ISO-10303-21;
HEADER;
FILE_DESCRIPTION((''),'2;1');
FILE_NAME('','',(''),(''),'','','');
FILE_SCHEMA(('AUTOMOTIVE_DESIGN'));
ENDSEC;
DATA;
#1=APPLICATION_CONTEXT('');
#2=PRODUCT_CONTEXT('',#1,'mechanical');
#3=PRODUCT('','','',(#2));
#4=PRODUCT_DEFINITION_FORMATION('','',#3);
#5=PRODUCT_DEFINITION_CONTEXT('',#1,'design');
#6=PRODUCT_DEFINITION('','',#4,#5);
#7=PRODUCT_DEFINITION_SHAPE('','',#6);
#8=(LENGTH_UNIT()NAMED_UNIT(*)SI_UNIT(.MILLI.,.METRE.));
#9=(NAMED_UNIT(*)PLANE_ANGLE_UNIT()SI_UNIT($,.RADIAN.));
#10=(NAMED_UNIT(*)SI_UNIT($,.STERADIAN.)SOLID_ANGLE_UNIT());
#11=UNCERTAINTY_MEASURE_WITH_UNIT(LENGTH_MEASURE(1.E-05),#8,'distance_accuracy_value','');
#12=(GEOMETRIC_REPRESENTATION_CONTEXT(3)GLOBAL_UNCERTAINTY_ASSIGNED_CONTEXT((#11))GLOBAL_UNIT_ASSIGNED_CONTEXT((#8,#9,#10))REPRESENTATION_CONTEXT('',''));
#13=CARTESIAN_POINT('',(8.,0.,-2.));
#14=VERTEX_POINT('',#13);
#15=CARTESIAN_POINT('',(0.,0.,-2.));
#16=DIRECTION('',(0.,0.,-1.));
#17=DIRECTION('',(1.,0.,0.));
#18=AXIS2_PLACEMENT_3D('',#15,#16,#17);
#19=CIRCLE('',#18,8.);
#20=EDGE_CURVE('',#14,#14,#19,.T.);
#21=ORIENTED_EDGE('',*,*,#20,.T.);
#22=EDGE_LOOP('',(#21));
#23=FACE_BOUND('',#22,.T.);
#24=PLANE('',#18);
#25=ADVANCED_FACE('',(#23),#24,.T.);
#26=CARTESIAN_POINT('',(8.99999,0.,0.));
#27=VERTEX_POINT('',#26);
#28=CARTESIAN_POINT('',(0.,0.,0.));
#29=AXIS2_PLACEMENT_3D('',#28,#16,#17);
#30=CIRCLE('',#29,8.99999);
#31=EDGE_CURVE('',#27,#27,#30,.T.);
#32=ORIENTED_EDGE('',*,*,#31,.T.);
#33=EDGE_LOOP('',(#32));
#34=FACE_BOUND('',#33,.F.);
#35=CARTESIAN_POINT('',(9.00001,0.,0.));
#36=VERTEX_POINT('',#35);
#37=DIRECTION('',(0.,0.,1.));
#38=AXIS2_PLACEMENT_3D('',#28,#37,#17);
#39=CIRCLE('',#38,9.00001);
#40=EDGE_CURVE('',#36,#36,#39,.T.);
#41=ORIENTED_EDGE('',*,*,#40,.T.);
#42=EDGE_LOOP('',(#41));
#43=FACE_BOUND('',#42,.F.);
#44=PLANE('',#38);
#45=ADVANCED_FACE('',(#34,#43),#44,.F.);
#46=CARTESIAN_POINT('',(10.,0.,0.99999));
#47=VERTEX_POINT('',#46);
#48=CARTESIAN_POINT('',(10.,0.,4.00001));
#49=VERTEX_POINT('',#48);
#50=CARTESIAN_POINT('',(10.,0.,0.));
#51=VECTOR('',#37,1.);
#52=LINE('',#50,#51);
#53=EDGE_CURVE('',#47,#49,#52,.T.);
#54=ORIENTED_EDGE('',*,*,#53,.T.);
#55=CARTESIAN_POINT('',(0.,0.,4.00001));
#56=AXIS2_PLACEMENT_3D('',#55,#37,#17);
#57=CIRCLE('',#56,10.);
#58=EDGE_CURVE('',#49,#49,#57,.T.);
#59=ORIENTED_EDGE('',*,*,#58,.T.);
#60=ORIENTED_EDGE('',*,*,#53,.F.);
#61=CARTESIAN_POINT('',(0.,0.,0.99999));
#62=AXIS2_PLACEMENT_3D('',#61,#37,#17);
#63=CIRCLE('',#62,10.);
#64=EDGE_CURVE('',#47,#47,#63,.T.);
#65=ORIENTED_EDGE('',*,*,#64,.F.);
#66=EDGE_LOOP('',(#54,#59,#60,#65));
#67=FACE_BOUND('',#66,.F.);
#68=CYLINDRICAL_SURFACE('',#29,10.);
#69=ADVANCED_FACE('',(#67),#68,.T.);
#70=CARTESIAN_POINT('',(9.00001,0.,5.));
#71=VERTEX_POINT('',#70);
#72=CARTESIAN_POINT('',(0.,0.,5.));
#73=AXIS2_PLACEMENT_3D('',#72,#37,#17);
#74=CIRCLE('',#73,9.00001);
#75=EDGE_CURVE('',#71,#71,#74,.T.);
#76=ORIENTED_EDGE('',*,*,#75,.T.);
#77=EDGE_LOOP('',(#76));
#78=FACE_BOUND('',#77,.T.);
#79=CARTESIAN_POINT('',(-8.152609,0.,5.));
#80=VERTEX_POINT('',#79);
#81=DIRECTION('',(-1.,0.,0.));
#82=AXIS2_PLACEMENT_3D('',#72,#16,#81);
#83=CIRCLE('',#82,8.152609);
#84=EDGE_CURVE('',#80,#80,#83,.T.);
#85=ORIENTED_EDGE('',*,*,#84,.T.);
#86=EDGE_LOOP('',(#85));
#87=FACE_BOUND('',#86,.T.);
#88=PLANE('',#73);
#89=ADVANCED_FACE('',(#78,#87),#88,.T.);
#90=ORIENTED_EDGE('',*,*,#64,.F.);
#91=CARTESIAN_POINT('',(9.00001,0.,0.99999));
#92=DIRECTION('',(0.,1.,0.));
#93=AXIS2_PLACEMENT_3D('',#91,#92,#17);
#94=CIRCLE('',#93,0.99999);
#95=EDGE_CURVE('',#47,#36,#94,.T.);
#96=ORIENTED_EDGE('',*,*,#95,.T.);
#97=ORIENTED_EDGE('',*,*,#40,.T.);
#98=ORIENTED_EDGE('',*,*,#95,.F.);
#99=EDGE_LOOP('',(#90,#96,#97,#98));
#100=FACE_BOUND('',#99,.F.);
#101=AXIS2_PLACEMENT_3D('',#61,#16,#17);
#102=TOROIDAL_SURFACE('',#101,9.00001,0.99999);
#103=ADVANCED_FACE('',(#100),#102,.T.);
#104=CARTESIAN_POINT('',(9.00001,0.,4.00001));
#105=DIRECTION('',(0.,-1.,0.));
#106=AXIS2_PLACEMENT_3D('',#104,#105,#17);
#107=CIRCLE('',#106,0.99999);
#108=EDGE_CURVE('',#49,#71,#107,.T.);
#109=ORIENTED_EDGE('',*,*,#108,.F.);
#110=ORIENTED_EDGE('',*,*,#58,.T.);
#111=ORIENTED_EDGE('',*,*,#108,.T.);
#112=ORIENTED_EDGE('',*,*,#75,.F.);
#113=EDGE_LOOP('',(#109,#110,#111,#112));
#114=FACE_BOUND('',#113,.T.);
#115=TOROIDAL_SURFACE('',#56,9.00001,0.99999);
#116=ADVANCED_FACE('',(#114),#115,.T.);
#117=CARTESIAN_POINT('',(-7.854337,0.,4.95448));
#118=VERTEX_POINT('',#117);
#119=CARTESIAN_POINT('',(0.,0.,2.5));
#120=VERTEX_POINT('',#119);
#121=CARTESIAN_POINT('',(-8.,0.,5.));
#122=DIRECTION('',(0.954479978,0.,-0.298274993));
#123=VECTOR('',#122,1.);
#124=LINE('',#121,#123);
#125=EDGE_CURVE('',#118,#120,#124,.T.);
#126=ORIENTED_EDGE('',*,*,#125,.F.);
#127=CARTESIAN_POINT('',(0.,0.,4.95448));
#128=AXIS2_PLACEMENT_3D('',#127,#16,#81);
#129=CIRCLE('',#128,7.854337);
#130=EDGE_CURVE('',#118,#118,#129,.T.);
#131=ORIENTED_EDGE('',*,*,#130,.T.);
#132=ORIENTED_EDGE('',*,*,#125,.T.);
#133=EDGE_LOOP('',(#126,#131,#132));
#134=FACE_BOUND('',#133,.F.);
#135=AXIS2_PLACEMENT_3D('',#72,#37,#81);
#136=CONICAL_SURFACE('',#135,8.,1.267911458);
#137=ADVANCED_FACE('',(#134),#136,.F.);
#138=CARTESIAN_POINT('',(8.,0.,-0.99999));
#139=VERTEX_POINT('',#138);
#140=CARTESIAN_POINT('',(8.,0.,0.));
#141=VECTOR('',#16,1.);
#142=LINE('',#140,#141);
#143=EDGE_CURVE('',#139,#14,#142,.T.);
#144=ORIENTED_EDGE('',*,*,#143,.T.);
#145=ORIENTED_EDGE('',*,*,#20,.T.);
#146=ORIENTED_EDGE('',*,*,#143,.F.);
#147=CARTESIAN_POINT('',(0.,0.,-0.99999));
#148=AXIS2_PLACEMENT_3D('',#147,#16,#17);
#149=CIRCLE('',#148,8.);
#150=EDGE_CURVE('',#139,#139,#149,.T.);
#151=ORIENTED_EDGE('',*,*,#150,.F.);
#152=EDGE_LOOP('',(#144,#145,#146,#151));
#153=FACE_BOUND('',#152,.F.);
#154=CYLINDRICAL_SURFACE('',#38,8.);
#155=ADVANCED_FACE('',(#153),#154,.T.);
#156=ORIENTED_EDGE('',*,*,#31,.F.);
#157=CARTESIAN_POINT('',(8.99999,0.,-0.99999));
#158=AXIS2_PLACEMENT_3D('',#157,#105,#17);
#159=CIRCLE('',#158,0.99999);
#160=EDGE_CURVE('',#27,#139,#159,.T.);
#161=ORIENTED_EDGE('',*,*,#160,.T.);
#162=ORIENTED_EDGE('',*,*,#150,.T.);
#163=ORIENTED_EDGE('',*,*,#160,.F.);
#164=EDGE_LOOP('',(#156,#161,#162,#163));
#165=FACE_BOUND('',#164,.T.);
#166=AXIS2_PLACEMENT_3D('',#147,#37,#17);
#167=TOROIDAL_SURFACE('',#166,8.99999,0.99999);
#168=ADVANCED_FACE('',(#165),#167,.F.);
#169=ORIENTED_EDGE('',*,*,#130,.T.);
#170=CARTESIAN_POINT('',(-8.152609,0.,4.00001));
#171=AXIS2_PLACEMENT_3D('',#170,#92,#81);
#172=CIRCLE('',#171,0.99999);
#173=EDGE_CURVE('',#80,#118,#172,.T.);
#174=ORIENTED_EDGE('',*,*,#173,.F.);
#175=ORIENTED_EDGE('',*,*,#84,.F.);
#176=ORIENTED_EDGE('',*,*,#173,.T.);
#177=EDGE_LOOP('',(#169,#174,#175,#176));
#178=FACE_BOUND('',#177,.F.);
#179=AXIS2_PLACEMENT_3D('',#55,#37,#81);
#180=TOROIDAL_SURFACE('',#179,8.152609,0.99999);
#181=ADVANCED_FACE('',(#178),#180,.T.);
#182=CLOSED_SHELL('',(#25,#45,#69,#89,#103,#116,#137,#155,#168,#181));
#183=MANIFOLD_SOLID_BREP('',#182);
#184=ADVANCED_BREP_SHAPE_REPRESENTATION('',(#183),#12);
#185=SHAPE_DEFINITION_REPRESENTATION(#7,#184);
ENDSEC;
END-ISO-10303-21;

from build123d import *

# Parameters (mm, degrees)
F0_R     = 10
F1_DEPTH = 5
F4_R     = 8
F5_DEPTH = 2
F6_R     = 0.99999


# Not quite as in the source:
# - a fillet or chamfer is up to 0.001 mm smaller than in the source, because OpenCascade refuses the exact size


with BuildPart() as f1:
    # F0 (on Top) → F1 (new body)
    with BuildSketch(Plane.XY):
        Circle(F0_R)
    extrude(amount=F1_DEPTH)

    # F2 (on Front) → F3 (revolve, cut)
    with BuildSketch(Plane.XZ):
        Polygon((-8, 5), (0, 2.5), (0, 5), align=None)
    revolve(axis=Axis((0, 0, 3.75), (0, 0, -1)), mode=Mode.SUBTRACT)

    # F4 (on face) → F5 (join)
    with BuildSketch(Plane(origin=(0, 0, 0), x_dir=(1, 0, 0), z_dir=(0, 0, -1))):
        Circle(F4_R)
    extrude(amount=F5_DEPTH)

    # F6 (radius 1 in the source; OpenCascade refuses exactly that, so slightly less here)
    f6_edges = [f1.edges().sort_by_distance(p)[0] for p in [
        (-8, 0, 0),
        (-10, 0, 0),
        (-10, 0, 5),
        (8, 0, 5),
    ]]
    fillet(f6_edges, radius=F6_R)


solid = f1.part
